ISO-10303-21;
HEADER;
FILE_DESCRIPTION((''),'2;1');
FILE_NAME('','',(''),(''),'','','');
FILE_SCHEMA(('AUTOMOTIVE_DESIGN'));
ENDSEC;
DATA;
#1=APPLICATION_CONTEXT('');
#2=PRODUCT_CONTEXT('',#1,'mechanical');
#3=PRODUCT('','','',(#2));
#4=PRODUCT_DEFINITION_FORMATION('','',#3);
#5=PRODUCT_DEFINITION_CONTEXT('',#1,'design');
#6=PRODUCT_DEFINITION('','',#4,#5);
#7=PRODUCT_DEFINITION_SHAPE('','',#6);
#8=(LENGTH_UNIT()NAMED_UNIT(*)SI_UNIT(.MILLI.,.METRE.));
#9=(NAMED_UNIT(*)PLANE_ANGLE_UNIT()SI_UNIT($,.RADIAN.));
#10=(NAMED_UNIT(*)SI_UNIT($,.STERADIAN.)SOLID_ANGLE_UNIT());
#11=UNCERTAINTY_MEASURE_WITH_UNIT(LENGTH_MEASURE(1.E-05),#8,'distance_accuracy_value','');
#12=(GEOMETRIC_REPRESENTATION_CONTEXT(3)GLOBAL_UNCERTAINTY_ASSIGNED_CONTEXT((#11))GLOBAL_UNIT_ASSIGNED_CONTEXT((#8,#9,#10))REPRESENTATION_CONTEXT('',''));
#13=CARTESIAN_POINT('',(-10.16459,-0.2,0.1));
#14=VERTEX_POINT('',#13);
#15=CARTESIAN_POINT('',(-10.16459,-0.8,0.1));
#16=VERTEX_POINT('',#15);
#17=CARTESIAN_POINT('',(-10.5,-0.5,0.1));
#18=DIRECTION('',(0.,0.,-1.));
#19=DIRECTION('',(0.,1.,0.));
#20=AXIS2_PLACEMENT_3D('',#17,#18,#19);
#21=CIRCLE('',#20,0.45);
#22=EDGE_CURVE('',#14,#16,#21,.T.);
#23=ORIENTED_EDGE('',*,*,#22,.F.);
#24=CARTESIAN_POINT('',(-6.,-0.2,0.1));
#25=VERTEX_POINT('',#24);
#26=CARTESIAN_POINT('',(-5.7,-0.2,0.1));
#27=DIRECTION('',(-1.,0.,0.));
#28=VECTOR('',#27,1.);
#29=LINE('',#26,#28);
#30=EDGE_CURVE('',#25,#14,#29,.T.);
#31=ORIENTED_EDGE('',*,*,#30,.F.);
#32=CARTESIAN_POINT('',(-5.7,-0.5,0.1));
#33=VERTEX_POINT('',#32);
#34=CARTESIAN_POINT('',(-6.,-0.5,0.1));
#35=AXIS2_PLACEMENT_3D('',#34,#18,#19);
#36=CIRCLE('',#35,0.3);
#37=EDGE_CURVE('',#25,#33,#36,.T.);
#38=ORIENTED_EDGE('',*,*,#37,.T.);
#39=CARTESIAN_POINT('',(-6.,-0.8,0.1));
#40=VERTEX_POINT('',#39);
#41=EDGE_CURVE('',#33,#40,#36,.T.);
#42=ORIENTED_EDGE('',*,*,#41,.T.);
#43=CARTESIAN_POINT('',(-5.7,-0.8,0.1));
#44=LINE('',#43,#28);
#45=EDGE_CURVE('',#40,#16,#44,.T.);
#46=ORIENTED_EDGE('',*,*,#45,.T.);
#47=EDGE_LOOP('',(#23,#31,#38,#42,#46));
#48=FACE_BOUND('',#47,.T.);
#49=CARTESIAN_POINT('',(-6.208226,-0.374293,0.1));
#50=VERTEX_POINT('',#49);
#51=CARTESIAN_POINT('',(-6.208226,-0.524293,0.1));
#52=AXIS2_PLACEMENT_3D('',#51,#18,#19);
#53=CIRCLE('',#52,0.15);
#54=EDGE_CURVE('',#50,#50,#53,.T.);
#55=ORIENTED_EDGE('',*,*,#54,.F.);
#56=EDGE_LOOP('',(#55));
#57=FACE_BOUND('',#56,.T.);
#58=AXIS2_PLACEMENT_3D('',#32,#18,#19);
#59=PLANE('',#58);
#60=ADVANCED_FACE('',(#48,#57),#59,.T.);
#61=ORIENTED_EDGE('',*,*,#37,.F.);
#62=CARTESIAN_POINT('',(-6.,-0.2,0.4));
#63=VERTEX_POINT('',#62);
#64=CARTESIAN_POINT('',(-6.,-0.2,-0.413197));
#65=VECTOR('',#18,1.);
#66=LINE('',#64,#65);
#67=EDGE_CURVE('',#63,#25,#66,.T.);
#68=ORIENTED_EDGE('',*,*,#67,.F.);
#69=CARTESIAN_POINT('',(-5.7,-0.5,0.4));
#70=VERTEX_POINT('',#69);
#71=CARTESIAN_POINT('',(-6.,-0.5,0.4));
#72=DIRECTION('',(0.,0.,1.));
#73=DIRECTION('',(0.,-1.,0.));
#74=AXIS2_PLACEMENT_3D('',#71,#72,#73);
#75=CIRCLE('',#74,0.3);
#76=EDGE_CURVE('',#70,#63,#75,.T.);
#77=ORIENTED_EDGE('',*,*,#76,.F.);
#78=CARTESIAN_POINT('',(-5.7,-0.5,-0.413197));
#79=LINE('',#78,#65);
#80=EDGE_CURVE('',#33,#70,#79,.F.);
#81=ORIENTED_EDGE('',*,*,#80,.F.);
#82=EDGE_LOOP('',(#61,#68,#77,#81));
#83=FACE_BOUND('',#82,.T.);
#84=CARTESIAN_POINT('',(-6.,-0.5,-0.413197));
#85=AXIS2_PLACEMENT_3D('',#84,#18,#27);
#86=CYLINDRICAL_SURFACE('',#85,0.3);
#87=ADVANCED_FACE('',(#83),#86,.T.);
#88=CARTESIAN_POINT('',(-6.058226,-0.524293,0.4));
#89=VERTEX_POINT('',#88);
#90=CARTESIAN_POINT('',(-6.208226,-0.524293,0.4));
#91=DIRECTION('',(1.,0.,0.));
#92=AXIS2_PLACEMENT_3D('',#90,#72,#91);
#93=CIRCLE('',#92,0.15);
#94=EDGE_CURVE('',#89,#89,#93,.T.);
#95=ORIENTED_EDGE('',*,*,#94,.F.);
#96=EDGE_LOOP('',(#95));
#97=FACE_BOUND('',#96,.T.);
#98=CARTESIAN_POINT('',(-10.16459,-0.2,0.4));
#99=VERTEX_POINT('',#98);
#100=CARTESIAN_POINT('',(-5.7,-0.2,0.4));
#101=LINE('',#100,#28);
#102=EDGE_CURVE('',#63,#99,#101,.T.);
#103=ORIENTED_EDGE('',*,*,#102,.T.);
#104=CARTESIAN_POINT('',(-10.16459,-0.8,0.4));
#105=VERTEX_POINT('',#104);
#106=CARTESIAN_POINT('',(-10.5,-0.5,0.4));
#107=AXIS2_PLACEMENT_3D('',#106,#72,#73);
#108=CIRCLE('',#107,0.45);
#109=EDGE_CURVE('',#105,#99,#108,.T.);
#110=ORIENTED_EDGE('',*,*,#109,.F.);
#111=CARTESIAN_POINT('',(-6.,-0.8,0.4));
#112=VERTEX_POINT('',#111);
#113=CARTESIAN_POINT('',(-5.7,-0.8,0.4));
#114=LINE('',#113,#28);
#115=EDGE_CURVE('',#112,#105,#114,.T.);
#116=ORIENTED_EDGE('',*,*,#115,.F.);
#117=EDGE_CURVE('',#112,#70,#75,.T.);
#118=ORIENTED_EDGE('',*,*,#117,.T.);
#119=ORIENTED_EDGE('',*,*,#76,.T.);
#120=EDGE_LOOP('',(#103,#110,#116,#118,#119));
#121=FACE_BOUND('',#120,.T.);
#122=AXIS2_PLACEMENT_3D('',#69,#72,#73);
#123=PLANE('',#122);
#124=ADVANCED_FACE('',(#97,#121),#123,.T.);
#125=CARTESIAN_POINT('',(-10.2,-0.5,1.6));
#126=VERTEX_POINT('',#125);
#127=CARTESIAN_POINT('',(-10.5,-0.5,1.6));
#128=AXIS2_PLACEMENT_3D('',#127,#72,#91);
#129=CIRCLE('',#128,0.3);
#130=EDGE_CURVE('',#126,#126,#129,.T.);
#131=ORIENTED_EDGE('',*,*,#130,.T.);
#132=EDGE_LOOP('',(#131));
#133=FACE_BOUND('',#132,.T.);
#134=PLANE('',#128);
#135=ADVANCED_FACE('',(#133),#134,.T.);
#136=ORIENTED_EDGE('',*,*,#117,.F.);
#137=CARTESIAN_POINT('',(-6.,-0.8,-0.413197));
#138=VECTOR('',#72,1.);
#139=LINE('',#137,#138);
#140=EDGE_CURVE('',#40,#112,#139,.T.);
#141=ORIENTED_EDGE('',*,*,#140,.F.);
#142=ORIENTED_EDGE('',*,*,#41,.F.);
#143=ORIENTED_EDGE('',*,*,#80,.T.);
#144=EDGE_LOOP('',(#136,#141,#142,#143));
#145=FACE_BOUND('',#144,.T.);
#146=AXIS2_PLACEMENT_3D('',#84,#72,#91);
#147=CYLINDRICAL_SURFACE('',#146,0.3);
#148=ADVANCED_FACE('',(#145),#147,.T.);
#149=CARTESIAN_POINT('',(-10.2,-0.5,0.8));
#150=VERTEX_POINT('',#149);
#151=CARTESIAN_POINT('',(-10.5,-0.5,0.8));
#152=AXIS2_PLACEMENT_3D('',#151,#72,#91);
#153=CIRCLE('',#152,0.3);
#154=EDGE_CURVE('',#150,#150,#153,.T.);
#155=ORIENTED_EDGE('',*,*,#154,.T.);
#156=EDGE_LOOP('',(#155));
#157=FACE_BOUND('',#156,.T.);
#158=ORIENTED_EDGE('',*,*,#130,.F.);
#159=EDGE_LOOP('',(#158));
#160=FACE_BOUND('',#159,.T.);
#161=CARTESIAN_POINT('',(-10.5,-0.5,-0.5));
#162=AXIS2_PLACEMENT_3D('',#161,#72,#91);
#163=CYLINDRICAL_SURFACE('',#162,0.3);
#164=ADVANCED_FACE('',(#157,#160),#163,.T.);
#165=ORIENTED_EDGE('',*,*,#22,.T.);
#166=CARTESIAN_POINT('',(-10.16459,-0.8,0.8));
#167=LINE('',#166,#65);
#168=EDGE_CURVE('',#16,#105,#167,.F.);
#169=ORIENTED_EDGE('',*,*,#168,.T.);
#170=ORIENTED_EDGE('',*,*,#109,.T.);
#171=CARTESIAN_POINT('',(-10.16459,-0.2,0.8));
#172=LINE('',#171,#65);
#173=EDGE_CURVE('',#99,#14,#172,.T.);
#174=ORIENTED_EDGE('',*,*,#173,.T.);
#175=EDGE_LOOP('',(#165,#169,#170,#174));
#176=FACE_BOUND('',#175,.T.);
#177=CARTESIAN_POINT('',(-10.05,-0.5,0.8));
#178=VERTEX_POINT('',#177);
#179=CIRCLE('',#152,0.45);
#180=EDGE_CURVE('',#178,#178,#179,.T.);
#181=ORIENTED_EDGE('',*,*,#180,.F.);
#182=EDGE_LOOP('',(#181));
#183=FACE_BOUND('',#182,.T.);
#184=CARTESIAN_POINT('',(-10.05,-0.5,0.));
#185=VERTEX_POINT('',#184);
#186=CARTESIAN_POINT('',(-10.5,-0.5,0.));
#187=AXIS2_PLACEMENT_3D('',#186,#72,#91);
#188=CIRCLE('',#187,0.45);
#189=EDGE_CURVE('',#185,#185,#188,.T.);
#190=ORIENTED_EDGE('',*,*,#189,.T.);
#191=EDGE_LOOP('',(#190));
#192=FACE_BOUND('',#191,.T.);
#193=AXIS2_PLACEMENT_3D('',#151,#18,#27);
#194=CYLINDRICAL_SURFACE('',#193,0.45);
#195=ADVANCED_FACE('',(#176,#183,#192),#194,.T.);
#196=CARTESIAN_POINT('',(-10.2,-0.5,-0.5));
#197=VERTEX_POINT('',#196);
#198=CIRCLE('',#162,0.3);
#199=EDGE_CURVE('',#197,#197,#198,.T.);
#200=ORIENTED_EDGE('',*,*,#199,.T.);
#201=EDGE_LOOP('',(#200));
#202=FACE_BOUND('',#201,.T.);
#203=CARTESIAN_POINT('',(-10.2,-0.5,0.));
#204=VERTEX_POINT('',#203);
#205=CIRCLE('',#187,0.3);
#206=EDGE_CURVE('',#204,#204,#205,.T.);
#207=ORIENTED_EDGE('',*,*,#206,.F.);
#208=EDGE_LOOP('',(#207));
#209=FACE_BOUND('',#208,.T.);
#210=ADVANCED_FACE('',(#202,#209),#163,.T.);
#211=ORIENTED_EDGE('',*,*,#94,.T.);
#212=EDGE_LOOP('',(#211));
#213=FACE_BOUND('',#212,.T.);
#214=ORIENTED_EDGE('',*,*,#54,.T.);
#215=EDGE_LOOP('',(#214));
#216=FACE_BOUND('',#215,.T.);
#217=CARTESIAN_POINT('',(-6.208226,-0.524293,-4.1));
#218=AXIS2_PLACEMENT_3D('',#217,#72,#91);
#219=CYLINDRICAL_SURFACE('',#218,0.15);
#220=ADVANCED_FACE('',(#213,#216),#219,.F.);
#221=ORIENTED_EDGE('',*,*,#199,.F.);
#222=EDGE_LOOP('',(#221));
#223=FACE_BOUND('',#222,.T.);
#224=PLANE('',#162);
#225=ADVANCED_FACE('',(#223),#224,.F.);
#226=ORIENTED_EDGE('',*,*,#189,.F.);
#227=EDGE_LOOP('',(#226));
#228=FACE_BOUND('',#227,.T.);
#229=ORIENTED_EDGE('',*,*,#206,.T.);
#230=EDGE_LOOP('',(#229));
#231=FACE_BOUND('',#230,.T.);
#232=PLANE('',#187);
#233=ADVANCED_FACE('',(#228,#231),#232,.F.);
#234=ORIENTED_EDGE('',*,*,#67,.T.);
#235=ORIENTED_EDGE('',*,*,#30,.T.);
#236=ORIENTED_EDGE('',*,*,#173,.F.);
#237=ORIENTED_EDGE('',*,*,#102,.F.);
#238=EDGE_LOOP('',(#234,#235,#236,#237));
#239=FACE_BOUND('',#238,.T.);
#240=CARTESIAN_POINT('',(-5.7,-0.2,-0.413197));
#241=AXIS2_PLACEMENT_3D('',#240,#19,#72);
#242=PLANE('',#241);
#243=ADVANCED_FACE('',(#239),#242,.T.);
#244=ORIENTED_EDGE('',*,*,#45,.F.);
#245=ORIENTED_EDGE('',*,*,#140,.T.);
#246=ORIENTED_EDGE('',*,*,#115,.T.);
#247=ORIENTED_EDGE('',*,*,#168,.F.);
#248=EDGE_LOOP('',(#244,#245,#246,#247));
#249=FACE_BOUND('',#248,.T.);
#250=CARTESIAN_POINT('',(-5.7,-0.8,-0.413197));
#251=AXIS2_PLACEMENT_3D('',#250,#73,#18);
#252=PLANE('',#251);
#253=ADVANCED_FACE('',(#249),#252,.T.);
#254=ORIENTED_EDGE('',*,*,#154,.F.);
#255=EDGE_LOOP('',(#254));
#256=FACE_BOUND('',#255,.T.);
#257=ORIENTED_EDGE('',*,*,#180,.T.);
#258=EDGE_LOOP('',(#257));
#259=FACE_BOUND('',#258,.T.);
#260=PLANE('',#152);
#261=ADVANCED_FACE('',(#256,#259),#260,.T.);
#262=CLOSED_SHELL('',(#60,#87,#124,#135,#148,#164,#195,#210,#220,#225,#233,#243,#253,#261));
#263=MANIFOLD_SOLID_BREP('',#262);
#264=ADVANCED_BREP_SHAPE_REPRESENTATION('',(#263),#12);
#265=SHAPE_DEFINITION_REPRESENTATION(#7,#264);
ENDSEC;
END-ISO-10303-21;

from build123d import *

# Parameters (mm, degrees)
SKETCH_1_R           = 0.45
SKETCH_1_R_2         = 0.3
EXTRUDE_1_DEPTH      = 0.8
SKETCH_3_W           = 0.3
SKETCH_3_H           = 0.6
EXTRUDE_4_DEPTH      = 4.5
SKETCH_7_R           = 0.15
CUT_EXTRUDE_3_DEPTH  = 4.5
FILLET_1_R           = 0.3
EXTRUDE_5_DEPTH      = 0.8
EXTRUDE_5_DEPTH_BACK = 1.3
SKETCH_8_R           = 0.3


with BuildPart() as part:
    # 草图1 → 凸台-拉伸1 (new body)
    with BuildSketch(Plane.XY):
        with Locations((-10.5, -0.5)):
            Circle(SKETCH_1_R)
        with Locations((-10.5, -0.5)):
            Circle(SKETCH_1_R_2, mode=Mode.SUBTRACT)
    extrude(amount=EXTRUDE_1_DEPTH)

    # 草图3 → 凸台-拉伸4 (add)
    with BuildSketch(Plane(origin=(-10.2, -0.5, 0.8), x_dir=(0, 0, -1), z_dir=(1, 0, 0))):
        with Locations((0.55, 0)):
            Rectangle(SKETCH_3_W, SKETCH_3_H)
    extrude(amount=EXTRUDE_4_DEPTH)

    # 草图7 → 切除-拉伸3 (cut)
    with BuildSketch(Plane.XY.offset(0.4)):
        with Locations((-6.208225563, -0.524292894)):
            Circle(SKETCH_7_R)
    extrude(amount=-CUT_EXTRUDE_3_DEPTH, mode=Mode.SUBTRACT)

    # 圆角1
    fillet_1_edges = [part.edges().sort_by_distance(p)[0] for p in [
        (-5.7, -0.8, 0.25),
        (-5.7, -0.2, 0.25),
    ]]
    fillet(fillet_1_edges, radius=FILLET_1_R - 0.0001)  # a hair under: the kernel refuses the full size

    # 草图8 → 凸台-拉伸5 (add, two sides: drawn at the far end of the back side and taken through both)
    with BuildSketch(Plane.XY.offset(0.8).offset(-EXTRUDE_5_DEPTH_BACK)):
        with Locations((-10.5, -0.5)):
            Circle(SKETCH_8_R)
    extrude(amount=EXTRUDE_5_DEPTH + EXTRUDE_5_DEPTH_BACK)


solid = part.part
